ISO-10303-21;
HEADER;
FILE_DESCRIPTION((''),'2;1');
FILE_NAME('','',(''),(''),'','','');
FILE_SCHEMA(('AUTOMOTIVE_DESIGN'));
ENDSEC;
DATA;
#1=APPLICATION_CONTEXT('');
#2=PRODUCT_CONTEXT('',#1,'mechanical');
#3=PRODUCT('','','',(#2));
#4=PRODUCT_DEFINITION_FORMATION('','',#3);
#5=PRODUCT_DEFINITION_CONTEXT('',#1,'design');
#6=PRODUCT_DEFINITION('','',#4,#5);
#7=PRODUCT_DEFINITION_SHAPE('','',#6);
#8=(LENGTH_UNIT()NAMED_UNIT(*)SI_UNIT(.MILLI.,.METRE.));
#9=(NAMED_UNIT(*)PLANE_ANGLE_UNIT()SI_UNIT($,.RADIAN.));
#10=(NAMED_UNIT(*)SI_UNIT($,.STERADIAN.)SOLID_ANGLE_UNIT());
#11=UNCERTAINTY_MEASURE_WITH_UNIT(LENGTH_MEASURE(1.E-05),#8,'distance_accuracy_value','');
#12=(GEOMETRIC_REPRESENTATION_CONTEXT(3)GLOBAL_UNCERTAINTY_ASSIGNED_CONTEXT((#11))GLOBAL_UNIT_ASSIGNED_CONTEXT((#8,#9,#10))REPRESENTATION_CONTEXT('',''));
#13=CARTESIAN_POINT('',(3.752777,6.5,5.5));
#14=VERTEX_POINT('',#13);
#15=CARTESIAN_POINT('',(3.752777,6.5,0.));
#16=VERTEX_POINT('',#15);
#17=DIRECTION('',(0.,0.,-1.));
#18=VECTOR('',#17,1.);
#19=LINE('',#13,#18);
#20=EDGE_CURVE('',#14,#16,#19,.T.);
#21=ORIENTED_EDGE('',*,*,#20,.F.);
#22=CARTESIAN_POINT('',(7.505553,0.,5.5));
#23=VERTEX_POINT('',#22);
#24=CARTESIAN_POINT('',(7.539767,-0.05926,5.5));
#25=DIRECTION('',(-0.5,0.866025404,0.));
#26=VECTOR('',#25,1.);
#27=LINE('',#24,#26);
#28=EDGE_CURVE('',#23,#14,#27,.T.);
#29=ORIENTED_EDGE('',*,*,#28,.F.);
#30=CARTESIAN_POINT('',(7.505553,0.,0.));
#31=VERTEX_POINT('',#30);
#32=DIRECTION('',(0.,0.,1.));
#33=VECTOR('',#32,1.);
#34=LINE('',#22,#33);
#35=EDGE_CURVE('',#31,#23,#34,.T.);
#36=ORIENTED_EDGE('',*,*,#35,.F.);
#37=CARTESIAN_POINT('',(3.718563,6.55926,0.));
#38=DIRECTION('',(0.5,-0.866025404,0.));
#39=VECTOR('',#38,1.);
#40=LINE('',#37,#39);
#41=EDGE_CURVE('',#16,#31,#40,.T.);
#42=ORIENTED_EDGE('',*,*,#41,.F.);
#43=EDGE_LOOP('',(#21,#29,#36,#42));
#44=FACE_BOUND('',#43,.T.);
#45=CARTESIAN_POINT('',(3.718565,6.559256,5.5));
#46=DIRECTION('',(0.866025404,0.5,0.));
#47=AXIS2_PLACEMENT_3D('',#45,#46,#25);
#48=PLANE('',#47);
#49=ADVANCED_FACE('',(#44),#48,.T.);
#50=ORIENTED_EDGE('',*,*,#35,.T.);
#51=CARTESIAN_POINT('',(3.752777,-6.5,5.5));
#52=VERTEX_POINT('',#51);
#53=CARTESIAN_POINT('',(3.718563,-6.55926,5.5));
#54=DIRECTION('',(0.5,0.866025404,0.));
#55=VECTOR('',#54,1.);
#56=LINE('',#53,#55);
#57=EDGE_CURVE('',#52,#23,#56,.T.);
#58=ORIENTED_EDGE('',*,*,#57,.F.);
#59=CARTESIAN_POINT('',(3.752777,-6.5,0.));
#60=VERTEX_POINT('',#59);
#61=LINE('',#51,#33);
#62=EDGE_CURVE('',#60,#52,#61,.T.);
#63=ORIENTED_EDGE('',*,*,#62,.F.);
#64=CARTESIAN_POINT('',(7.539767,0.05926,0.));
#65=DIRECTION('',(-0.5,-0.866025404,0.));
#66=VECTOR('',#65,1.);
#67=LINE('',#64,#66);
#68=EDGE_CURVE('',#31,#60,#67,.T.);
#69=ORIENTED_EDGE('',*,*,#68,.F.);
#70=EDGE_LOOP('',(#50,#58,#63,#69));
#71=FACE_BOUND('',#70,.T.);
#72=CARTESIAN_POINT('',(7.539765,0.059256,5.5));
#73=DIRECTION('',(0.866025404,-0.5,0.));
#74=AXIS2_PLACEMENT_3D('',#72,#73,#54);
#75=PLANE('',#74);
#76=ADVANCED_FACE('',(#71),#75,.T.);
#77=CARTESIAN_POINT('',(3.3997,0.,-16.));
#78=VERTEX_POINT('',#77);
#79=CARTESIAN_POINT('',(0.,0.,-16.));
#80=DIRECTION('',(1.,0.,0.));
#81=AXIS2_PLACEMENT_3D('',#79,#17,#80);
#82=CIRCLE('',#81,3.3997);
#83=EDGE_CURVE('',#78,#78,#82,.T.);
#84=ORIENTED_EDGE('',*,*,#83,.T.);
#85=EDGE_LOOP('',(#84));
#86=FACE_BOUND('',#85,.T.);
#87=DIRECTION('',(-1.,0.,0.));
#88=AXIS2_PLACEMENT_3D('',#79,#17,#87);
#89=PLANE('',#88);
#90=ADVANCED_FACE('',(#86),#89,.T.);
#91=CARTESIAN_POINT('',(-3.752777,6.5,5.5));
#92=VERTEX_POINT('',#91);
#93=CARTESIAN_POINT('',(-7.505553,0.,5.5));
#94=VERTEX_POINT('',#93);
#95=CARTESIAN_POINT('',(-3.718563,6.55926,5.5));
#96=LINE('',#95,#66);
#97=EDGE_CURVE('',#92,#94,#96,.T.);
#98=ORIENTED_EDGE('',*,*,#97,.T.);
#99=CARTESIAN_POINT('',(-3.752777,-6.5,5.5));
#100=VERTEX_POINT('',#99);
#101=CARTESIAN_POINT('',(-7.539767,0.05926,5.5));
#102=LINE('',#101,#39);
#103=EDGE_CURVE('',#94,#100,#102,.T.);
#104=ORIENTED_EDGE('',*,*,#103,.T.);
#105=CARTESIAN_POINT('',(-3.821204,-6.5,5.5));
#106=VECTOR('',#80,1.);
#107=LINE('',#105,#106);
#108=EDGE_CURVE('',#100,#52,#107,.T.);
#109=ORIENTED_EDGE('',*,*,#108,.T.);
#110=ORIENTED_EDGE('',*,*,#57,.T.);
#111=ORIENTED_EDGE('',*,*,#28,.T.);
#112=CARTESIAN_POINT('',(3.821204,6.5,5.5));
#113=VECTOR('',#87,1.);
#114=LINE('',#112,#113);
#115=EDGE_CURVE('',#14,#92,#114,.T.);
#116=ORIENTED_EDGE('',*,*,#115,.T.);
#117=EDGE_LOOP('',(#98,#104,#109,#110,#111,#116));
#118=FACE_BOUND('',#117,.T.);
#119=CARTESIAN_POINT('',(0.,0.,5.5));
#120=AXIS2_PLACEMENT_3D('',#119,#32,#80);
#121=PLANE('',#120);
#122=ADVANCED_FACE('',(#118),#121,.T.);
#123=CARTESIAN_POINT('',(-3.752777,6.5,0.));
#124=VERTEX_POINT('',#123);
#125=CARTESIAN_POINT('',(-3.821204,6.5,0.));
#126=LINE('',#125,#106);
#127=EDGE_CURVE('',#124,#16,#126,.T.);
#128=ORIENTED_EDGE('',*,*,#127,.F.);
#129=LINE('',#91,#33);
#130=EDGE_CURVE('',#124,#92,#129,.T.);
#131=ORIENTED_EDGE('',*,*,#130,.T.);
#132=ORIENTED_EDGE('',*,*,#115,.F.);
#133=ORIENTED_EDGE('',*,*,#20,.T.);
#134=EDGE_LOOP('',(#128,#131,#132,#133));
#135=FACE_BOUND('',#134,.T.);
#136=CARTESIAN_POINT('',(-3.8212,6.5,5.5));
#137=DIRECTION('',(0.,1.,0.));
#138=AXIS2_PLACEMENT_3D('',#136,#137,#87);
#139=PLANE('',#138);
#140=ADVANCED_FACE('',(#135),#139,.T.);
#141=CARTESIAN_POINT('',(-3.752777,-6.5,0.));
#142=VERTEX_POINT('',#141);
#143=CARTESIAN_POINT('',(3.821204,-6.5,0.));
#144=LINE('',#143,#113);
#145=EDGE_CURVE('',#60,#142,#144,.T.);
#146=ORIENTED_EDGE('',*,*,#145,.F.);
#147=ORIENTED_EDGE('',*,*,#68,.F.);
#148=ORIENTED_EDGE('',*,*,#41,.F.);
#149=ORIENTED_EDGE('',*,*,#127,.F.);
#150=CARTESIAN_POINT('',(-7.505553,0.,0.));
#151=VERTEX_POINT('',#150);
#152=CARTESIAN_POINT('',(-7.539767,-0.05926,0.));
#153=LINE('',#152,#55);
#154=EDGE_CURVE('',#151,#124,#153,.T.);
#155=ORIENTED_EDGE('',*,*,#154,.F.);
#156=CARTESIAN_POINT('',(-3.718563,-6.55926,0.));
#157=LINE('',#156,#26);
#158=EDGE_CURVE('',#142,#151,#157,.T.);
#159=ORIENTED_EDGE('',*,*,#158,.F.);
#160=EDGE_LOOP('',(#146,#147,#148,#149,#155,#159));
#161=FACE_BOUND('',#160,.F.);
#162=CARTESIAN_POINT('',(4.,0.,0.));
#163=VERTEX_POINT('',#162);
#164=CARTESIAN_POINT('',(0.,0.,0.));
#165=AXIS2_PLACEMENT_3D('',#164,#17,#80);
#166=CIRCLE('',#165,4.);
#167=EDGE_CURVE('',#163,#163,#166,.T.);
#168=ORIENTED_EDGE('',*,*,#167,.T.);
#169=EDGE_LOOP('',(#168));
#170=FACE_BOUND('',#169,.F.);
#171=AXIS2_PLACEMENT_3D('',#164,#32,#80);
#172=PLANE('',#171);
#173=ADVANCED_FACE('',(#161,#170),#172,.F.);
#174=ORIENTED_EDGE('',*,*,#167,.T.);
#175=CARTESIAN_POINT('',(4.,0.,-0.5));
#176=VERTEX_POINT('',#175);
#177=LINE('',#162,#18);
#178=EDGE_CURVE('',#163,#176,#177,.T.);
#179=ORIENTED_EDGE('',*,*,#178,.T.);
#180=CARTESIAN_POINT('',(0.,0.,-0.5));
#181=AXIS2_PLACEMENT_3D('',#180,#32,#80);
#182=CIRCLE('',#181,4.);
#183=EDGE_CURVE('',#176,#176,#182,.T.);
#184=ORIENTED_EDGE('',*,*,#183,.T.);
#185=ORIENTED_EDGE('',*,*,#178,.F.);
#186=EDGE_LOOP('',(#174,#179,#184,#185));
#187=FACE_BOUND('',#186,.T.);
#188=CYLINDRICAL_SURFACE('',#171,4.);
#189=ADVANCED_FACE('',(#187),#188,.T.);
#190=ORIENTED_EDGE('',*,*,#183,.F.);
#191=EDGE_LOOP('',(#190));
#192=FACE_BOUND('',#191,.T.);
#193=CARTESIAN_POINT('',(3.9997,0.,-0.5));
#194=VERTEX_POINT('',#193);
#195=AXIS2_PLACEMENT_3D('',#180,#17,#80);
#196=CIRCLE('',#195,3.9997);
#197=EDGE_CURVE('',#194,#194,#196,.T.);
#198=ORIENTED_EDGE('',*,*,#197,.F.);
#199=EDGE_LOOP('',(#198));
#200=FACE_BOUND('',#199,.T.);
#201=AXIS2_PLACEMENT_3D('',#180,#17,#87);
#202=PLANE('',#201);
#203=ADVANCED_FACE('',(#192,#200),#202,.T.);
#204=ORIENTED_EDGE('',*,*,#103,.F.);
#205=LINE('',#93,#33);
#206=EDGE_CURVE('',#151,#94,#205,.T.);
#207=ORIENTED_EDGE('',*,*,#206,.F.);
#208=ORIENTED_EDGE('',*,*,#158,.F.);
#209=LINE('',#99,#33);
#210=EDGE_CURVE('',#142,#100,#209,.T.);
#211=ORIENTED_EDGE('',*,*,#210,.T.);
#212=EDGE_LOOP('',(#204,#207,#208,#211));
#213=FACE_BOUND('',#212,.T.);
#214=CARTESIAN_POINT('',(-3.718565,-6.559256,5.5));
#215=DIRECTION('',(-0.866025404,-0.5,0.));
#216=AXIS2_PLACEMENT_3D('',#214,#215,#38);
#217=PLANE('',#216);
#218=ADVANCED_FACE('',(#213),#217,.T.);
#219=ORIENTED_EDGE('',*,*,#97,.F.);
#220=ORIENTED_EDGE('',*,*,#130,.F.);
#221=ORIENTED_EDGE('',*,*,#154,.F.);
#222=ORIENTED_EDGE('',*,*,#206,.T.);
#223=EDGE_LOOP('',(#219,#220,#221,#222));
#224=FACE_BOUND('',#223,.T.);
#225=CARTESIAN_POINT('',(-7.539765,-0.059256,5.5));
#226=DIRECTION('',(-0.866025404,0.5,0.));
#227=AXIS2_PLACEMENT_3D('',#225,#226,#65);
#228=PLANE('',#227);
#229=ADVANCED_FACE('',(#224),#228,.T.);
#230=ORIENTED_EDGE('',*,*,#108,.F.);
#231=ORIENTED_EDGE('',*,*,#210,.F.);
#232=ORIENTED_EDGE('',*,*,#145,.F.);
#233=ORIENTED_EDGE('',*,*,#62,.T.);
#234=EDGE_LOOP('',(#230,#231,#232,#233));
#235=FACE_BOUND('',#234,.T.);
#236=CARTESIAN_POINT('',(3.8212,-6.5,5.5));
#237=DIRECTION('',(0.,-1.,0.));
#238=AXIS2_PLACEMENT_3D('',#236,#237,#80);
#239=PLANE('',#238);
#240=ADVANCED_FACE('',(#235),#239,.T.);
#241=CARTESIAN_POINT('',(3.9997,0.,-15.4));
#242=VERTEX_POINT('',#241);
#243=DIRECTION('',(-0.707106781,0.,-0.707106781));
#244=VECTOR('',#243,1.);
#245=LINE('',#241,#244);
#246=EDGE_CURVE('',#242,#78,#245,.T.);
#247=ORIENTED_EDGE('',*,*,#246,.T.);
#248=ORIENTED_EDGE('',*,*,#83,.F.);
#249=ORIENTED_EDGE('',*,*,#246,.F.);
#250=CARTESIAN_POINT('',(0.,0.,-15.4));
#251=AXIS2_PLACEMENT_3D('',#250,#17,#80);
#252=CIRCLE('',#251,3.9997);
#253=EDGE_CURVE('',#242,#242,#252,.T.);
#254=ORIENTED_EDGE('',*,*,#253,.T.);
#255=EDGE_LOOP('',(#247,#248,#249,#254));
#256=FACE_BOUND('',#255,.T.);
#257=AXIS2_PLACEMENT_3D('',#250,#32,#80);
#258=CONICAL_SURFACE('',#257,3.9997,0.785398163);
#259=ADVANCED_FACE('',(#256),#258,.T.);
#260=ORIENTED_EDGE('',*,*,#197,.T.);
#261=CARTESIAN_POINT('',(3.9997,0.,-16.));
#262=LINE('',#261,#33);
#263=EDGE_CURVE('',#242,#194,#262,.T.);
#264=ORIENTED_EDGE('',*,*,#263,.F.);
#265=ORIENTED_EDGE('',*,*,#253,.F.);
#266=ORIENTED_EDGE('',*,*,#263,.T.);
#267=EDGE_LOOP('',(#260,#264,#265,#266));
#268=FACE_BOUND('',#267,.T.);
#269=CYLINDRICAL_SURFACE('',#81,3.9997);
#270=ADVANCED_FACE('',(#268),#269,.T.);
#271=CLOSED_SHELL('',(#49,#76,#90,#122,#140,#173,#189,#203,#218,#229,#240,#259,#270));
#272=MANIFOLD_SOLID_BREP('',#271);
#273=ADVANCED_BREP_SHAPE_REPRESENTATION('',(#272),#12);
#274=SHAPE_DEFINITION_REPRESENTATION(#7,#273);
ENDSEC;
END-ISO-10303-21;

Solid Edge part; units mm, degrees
sketch "Sketch1" plane through (0, 0, 0) normal (0, 0, 1) x (1, 0, 0)
  circle A0 centre (0, 0) radius 7.54
  dimension "D1" = 15.08
extrude "Protrusion1" add sketch "Sketch1" along normal blind 5.5
sketch "Sketch2" plane through (0, 0, 0) normal (0, 0, -1) x (1, 0, 0)
  circle A0 centre (0, 0) radius 4
extrude "Protrusion2" add sketch "Sketch2" along normal blind 16
sketch "Sketch3" plane through (0, 0, -16) normal (0, 0, -1) x (1, 0, 0)
  circle A0 centre (0, 0) radius 3.9997
extrude "Cutout1" cut sketch "Sketch3" against normal blind 15.5 flip side to cut
chamfer "Chamfer_1" distance 0.6 angle 45 1 edges at (-3.9997, 0, -16)
sketch "Sketch4" plane through (0, 0, 5.5) normal (0, 0, 1) x (1, 0, 0)
  line L0 (-3.8212, 6.5) -> (3.8212, 6.5)
  dimension "D1" = 13
extrude "Cutout2" cut sketch "Sketch4" against normal up to next material side at (0, 6.55, 5.5)
pattern_circular "Pattern1" count 6 over 360 about axis through (0, 0, 5.5) along (0, 0, 1) of "Cutout2"
properties part number "24104778"
